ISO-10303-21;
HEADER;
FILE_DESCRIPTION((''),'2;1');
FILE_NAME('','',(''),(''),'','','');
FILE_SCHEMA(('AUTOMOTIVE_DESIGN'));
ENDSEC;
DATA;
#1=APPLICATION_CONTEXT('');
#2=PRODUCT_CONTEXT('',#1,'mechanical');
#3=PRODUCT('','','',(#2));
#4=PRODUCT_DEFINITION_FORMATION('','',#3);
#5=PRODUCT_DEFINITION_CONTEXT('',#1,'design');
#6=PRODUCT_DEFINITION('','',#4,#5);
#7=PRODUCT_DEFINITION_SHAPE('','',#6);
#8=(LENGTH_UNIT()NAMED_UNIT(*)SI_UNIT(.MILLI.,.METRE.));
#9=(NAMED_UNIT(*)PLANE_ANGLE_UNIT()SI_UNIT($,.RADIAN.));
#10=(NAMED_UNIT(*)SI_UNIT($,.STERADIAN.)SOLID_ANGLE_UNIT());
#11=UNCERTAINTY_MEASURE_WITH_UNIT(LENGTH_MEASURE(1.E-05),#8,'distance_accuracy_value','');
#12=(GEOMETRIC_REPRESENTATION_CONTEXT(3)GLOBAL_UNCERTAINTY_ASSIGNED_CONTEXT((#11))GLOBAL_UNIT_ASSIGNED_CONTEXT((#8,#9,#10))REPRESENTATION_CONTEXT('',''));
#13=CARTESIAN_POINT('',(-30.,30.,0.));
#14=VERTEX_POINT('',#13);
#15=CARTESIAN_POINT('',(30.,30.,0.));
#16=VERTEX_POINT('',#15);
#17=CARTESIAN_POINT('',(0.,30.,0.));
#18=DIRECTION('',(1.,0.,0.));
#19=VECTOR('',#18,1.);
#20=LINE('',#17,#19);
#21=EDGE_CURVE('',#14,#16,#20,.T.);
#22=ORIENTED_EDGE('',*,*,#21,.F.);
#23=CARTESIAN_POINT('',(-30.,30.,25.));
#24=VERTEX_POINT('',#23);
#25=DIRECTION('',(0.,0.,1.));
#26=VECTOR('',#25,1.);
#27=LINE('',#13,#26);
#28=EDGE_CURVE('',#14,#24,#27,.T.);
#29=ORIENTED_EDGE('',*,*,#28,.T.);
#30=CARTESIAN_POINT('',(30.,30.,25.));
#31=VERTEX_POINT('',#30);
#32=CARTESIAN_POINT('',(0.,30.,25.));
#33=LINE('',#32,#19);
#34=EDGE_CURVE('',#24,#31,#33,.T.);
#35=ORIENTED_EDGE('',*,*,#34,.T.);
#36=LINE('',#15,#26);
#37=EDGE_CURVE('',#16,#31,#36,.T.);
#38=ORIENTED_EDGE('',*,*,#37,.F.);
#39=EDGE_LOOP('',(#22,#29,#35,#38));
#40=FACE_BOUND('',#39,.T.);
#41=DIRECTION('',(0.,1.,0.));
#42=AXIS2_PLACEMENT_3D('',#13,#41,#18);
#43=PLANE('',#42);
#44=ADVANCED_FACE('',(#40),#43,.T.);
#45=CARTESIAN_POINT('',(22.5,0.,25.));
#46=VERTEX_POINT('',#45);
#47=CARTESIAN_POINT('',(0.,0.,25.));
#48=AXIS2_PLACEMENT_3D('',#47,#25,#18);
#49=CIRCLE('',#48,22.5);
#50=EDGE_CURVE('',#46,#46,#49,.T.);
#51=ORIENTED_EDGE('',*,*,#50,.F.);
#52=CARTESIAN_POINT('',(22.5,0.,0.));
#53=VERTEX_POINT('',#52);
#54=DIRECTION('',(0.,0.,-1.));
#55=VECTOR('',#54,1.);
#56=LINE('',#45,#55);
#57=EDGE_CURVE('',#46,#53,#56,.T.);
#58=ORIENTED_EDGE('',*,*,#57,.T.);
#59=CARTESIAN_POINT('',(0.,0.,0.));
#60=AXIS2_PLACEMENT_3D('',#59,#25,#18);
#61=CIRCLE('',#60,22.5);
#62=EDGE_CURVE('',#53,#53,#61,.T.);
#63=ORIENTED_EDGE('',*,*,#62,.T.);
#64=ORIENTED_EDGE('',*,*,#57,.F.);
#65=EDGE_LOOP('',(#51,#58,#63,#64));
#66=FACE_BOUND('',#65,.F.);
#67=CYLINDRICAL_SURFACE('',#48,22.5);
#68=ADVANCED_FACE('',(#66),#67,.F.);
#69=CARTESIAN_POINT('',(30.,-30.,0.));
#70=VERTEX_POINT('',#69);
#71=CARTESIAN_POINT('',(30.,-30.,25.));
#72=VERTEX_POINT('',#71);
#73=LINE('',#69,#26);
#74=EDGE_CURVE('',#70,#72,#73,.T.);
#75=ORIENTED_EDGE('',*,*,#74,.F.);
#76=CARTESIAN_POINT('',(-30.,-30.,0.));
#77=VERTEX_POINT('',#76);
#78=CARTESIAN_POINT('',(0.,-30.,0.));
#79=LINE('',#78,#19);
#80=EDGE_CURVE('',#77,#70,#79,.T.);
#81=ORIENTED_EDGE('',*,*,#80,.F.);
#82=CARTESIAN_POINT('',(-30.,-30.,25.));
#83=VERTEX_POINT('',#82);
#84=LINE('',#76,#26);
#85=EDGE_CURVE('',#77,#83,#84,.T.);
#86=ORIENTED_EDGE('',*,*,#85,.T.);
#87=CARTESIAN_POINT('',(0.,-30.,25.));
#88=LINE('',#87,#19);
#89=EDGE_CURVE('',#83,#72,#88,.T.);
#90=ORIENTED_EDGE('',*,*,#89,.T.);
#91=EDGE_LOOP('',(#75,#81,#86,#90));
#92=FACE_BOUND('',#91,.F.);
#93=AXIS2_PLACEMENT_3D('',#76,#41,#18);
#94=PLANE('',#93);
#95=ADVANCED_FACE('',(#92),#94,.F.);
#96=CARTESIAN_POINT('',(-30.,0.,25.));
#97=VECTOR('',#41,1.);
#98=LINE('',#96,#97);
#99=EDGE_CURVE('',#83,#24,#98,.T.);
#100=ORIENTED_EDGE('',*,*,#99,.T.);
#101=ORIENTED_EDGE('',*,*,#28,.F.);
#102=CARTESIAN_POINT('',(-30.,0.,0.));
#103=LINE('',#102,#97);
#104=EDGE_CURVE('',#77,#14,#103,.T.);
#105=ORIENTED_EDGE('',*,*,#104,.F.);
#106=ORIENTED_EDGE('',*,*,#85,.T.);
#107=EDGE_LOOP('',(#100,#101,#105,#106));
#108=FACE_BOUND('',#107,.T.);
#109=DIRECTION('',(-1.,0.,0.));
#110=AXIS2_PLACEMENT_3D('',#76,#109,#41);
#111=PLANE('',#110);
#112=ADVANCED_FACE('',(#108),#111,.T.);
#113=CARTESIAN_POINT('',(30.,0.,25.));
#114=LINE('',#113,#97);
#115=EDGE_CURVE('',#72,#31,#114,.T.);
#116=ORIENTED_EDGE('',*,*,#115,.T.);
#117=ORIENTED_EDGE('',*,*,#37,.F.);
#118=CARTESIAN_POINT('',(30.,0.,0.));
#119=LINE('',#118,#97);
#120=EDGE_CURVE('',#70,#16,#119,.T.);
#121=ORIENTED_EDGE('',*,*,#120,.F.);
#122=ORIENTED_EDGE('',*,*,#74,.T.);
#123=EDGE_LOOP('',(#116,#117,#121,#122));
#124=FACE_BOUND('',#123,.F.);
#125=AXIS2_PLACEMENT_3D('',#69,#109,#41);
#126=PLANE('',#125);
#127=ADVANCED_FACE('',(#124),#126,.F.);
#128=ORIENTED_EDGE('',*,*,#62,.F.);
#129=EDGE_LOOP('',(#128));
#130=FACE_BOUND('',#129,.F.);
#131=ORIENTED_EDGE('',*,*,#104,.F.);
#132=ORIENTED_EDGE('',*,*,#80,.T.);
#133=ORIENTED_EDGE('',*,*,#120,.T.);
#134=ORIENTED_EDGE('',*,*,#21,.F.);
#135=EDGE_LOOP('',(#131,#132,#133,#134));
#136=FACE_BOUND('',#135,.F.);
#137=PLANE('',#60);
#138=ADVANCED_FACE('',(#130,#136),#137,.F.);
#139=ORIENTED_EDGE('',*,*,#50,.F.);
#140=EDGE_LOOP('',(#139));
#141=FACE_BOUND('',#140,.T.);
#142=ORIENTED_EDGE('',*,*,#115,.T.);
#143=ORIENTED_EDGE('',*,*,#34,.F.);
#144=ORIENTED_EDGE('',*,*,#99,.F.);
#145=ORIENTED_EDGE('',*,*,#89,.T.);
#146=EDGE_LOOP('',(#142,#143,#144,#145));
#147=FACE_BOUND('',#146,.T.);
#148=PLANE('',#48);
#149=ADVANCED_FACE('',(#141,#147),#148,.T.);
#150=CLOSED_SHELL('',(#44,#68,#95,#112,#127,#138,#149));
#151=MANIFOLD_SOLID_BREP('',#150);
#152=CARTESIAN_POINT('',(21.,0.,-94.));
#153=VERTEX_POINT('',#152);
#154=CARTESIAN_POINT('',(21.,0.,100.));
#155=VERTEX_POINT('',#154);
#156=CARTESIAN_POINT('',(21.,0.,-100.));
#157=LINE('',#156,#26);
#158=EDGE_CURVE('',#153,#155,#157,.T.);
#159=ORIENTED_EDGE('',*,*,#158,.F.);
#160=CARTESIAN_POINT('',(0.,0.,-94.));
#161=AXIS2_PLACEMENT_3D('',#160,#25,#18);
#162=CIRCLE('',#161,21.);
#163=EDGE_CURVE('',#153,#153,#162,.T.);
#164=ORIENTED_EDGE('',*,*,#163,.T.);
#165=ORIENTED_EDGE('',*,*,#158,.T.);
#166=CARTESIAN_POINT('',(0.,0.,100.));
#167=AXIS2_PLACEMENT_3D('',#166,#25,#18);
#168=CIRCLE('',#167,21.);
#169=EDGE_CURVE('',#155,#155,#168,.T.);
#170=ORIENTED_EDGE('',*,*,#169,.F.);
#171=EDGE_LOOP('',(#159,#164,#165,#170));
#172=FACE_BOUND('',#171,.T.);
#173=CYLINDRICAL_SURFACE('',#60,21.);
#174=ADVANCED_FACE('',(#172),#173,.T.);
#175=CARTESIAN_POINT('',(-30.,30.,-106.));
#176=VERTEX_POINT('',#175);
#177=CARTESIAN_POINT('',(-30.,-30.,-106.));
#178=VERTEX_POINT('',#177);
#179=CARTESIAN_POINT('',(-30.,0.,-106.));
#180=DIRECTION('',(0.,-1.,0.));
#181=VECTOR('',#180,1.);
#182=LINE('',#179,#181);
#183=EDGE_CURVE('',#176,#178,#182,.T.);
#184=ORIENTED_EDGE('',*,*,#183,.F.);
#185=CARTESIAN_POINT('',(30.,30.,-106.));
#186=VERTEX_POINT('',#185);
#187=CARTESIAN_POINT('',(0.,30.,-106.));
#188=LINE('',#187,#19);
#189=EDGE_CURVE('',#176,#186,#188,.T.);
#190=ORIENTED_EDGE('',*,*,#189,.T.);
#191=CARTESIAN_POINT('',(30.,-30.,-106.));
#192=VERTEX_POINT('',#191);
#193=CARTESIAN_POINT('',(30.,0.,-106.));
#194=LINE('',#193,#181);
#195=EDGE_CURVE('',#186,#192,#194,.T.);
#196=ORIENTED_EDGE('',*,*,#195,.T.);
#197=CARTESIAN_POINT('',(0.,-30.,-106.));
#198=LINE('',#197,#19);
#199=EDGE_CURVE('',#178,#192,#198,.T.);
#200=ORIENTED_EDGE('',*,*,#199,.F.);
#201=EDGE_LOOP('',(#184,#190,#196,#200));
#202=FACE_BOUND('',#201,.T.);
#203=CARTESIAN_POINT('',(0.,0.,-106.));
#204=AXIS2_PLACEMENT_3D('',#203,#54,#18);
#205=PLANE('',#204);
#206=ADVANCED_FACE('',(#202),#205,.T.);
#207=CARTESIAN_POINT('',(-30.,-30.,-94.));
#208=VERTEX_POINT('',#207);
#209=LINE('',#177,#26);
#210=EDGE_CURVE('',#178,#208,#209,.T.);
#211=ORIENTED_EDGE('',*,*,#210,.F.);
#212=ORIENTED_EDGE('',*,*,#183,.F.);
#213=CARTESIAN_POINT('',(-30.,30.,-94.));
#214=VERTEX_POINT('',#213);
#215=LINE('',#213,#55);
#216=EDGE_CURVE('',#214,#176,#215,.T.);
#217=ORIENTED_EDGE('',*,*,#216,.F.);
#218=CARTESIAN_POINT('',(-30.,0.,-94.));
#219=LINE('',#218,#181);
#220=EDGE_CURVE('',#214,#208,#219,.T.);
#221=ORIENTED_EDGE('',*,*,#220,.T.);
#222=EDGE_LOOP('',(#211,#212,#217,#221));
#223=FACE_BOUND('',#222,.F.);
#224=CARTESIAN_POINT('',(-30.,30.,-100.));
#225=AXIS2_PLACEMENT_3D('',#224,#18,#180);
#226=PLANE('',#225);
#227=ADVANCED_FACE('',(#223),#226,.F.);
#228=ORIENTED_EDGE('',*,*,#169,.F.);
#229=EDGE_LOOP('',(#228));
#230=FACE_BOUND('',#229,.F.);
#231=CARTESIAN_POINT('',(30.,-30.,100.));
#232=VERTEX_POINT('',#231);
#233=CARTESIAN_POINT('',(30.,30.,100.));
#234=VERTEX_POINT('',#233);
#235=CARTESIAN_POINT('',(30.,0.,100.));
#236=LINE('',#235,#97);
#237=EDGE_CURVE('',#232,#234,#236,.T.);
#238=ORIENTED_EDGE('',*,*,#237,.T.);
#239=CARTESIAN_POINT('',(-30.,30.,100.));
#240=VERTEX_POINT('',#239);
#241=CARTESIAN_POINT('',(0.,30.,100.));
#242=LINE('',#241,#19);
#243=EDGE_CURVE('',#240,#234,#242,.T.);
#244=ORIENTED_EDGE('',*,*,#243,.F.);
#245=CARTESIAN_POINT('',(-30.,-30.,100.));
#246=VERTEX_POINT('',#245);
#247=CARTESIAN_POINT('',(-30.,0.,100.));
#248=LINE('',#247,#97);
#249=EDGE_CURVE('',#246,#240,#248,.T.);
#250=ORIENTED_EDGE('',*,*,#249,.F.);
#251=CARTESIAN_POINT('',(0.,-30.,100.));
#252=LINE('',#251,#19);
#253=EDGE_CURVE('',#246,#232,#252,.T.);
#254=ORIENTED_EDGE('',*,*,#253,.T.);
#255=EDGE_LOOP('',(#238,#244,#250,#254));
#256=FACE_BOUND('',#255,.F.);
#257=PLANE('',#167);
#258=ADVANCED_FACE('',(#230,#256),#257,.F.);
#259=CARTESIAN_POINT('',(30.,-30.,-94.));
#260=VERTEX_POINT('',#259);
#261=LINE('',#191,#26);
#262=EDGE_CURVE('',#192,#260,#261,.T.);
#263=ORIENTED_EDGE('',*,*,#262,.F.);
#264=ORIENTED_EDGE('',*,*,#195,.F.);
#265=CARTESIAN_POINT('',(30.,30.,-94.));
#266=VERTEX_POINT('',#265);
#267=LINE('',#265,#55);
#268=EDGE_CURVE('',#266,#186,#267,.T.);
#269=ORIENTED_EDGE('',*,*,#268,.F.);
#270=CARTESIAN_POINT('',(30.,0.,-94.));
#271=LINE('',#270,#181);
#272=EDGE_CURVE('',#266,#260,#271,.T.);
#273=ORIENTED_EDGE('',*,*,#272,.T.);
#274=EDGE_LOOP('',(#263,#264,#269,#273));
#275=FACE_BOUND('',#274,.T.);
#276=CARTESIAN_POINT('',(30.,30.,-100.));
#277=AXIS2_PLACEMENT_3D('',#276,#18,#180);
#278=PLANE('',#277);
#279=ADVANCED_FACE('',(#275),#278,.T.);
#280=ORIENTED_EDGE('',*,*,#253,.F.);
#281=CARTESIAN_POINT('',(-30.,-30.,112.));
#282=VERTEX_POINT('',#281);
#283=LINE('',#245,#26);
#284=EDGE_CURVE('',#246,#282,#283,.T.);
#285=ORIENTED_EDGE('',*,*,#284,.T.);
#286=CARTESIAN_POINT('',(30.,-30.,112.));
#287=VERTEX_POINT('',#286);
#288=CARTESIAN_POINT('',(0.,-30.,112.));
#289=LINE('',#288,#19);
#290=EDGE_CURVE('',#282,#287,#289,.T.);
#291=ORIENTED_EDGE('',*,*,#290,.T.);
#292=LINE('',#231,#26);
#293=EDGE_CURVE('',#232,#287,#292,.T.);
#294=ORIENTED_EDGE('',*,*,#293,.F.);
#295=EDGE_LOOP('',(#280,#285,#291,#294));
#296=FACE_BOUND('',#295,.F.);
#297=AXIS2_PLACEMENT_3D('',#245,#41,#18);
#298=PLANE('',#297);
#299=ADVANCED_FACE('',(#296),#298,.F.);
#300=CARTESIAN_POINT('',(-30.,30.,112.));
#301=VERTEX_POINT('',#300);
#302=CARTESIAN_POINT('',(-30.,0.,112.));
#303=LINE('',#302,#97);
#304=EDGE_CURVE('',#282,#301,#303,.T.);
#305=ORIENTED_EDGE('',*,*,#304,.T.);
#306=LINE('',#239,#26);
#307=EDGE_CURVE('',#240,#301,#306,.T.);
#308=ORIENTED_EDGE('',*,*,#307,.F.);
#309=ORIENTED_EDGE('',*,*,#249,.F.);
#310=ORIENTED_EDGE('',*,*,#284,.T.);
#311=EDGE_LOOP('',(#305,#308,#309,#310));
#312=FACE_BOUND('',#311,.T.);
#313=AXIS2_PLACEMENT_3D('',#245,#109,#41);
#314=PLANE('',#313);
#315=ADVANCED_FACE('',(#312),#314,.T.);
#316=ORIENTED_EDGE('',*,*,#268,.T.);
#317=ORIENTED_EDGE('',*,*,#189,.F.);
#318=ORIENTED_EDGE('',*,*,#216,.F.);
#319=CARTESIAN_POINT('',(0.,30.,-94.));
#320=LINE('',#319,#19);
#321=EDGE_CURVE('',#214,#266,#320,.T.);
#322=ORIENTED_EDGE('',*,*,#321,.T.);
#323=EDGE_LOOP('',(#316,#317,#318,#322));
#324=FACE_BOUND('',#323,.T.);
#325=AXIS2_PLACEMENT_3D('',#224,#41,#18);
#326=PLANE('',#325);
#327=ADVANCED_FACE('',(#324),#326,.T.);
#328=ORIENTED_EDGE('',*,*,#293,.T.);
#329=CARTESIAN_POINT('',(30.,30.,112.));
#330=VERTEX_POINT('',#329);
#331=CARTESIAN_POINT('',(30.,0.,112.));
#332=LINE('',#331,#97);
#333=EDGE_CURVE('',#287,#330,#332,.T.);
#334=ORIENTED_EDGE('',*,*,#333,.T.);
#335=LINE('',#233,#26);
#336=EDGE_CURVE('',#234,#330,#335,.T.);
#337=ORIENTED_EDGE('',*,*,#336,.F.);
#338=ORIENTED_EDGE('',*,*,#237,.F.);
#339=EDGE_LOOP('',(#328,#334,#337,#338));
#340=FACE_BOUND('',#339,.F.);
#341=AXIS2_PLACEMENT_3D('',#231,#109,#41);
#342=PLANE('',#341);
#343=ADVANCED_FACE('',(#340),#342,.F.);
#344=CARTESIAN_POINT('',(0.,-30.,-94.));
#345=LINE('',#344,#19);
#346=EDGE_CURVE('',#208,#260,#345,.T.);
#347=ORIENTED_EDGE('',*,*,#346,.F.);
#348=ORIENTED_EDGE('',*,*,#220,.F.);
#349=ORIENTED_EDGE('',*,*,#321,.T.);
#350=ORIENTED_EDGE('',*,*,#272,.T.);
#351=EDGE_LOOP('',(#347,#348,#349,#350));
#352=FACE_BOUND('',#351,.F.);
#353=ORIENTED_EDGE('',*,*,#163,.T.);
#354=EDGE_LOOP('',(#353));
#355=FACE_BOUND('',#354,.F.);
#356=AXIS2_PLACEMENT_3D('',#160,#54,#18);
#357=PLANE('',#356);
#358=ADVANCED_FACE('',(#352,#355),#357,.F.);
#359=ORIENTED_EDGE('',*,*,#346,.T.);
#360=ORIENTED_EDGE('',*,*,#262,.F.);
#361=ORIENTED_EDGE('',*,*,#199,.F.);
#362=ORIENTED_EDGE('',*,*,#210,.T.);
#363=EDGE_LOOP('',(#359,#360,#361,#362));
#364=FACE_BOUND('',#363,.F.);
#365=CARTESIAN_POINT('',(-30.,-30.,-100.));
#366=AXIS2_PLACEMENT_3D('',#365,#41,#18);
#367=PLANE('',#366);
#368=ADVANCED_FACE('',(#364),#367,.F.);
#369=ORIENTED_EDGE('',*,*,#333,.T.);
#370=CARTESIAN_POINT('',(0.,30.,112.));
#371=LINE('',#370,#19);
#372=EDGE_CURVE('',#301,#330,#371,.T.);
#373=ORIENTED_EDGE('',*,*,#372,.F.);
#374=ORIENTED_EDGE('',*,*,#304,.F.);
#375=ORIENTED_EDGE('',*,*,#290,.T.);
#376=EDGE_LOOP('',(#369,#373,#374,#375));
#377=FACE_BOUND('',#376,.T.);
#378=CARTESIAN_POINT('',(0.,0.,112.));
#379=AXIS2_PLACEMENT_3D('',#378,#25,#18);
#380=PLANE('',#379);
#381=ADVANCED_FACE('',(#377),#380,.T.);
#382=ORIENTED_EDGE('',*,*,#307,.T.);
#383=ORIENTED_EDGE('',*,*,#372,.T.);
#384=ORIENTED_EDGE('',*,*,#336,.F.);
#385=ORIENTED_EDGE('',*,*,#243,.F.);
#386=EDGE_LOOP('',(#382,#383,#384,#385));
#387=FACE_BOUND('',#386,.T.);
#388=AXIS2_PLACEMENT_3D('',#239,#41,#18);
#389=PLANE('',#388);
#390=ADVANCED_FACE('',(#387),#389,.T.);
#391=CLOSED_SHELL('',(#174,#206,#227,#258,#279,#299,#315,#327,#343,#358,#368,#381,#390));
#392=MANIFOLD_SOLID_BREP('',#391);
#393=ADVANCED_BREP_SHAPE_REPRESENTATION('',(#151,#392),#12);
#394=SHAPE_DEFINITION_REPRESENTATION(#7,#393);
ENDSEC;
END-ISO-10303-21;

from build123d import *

# Parameters (mm, degrees)
F0_W     = 60
F0_H     = 60
F1_DEPTH = 25
F2_R     = 22.5
F3_DEPTH = 25.001
F4_R     = 21
F5_DEPTH = 100
F7_W     = 60
F7_H     = 60
F7_R     = 21
F8_DEPTH = 6
F6_W     = 60
F6_H     = 60
F9_DEPTH = 12


with BuildPart() as f1:
    # F0 (on Top) → F1 (new body)
    with BuildSketch(Plane.XY):
        Rectangle(F0_W, F0_H)
    extrude(amount=F1_DEPTH)

    # F2 (on face) → F3 (cut, through all)
    with BuildSketch(Plane.XY.offset(25)):
        Circle(F2_R)
    extrude(amount=-F3_DEPTH, mode=Mode.SUBTRACT)


with BuildPart() as f5:
    # F4 (on Top) → F5 (new body, symmetric)
    with BuildSketch(Plane.XY):
        Circle(F4_R)
    extrude(amount=F5_DEPTH, both=True)

    # F7 (on face) → F8 (join, symmetric)
    with BuildSketch(Plane(origin=(0, 0, -100), x_dir=(1, 0, 0), z_dir=(0, 0, -1))):
        Rectangle(F7_W, F7_H)
        Circle(F7_R, mode=Mode.SUBTRACT)
        Circle(F7_R)
    extrude(amount=F8_DEPTH, both=True)

    # F6 (on face) → F9 (join)
    with BuildSketch(Plane.XY.offset(100)):
        Rectangle(F6_W, F6_H)
    extrude(amount=F9_DEPTH)


solid = Compound([f1.part, f5.part])
